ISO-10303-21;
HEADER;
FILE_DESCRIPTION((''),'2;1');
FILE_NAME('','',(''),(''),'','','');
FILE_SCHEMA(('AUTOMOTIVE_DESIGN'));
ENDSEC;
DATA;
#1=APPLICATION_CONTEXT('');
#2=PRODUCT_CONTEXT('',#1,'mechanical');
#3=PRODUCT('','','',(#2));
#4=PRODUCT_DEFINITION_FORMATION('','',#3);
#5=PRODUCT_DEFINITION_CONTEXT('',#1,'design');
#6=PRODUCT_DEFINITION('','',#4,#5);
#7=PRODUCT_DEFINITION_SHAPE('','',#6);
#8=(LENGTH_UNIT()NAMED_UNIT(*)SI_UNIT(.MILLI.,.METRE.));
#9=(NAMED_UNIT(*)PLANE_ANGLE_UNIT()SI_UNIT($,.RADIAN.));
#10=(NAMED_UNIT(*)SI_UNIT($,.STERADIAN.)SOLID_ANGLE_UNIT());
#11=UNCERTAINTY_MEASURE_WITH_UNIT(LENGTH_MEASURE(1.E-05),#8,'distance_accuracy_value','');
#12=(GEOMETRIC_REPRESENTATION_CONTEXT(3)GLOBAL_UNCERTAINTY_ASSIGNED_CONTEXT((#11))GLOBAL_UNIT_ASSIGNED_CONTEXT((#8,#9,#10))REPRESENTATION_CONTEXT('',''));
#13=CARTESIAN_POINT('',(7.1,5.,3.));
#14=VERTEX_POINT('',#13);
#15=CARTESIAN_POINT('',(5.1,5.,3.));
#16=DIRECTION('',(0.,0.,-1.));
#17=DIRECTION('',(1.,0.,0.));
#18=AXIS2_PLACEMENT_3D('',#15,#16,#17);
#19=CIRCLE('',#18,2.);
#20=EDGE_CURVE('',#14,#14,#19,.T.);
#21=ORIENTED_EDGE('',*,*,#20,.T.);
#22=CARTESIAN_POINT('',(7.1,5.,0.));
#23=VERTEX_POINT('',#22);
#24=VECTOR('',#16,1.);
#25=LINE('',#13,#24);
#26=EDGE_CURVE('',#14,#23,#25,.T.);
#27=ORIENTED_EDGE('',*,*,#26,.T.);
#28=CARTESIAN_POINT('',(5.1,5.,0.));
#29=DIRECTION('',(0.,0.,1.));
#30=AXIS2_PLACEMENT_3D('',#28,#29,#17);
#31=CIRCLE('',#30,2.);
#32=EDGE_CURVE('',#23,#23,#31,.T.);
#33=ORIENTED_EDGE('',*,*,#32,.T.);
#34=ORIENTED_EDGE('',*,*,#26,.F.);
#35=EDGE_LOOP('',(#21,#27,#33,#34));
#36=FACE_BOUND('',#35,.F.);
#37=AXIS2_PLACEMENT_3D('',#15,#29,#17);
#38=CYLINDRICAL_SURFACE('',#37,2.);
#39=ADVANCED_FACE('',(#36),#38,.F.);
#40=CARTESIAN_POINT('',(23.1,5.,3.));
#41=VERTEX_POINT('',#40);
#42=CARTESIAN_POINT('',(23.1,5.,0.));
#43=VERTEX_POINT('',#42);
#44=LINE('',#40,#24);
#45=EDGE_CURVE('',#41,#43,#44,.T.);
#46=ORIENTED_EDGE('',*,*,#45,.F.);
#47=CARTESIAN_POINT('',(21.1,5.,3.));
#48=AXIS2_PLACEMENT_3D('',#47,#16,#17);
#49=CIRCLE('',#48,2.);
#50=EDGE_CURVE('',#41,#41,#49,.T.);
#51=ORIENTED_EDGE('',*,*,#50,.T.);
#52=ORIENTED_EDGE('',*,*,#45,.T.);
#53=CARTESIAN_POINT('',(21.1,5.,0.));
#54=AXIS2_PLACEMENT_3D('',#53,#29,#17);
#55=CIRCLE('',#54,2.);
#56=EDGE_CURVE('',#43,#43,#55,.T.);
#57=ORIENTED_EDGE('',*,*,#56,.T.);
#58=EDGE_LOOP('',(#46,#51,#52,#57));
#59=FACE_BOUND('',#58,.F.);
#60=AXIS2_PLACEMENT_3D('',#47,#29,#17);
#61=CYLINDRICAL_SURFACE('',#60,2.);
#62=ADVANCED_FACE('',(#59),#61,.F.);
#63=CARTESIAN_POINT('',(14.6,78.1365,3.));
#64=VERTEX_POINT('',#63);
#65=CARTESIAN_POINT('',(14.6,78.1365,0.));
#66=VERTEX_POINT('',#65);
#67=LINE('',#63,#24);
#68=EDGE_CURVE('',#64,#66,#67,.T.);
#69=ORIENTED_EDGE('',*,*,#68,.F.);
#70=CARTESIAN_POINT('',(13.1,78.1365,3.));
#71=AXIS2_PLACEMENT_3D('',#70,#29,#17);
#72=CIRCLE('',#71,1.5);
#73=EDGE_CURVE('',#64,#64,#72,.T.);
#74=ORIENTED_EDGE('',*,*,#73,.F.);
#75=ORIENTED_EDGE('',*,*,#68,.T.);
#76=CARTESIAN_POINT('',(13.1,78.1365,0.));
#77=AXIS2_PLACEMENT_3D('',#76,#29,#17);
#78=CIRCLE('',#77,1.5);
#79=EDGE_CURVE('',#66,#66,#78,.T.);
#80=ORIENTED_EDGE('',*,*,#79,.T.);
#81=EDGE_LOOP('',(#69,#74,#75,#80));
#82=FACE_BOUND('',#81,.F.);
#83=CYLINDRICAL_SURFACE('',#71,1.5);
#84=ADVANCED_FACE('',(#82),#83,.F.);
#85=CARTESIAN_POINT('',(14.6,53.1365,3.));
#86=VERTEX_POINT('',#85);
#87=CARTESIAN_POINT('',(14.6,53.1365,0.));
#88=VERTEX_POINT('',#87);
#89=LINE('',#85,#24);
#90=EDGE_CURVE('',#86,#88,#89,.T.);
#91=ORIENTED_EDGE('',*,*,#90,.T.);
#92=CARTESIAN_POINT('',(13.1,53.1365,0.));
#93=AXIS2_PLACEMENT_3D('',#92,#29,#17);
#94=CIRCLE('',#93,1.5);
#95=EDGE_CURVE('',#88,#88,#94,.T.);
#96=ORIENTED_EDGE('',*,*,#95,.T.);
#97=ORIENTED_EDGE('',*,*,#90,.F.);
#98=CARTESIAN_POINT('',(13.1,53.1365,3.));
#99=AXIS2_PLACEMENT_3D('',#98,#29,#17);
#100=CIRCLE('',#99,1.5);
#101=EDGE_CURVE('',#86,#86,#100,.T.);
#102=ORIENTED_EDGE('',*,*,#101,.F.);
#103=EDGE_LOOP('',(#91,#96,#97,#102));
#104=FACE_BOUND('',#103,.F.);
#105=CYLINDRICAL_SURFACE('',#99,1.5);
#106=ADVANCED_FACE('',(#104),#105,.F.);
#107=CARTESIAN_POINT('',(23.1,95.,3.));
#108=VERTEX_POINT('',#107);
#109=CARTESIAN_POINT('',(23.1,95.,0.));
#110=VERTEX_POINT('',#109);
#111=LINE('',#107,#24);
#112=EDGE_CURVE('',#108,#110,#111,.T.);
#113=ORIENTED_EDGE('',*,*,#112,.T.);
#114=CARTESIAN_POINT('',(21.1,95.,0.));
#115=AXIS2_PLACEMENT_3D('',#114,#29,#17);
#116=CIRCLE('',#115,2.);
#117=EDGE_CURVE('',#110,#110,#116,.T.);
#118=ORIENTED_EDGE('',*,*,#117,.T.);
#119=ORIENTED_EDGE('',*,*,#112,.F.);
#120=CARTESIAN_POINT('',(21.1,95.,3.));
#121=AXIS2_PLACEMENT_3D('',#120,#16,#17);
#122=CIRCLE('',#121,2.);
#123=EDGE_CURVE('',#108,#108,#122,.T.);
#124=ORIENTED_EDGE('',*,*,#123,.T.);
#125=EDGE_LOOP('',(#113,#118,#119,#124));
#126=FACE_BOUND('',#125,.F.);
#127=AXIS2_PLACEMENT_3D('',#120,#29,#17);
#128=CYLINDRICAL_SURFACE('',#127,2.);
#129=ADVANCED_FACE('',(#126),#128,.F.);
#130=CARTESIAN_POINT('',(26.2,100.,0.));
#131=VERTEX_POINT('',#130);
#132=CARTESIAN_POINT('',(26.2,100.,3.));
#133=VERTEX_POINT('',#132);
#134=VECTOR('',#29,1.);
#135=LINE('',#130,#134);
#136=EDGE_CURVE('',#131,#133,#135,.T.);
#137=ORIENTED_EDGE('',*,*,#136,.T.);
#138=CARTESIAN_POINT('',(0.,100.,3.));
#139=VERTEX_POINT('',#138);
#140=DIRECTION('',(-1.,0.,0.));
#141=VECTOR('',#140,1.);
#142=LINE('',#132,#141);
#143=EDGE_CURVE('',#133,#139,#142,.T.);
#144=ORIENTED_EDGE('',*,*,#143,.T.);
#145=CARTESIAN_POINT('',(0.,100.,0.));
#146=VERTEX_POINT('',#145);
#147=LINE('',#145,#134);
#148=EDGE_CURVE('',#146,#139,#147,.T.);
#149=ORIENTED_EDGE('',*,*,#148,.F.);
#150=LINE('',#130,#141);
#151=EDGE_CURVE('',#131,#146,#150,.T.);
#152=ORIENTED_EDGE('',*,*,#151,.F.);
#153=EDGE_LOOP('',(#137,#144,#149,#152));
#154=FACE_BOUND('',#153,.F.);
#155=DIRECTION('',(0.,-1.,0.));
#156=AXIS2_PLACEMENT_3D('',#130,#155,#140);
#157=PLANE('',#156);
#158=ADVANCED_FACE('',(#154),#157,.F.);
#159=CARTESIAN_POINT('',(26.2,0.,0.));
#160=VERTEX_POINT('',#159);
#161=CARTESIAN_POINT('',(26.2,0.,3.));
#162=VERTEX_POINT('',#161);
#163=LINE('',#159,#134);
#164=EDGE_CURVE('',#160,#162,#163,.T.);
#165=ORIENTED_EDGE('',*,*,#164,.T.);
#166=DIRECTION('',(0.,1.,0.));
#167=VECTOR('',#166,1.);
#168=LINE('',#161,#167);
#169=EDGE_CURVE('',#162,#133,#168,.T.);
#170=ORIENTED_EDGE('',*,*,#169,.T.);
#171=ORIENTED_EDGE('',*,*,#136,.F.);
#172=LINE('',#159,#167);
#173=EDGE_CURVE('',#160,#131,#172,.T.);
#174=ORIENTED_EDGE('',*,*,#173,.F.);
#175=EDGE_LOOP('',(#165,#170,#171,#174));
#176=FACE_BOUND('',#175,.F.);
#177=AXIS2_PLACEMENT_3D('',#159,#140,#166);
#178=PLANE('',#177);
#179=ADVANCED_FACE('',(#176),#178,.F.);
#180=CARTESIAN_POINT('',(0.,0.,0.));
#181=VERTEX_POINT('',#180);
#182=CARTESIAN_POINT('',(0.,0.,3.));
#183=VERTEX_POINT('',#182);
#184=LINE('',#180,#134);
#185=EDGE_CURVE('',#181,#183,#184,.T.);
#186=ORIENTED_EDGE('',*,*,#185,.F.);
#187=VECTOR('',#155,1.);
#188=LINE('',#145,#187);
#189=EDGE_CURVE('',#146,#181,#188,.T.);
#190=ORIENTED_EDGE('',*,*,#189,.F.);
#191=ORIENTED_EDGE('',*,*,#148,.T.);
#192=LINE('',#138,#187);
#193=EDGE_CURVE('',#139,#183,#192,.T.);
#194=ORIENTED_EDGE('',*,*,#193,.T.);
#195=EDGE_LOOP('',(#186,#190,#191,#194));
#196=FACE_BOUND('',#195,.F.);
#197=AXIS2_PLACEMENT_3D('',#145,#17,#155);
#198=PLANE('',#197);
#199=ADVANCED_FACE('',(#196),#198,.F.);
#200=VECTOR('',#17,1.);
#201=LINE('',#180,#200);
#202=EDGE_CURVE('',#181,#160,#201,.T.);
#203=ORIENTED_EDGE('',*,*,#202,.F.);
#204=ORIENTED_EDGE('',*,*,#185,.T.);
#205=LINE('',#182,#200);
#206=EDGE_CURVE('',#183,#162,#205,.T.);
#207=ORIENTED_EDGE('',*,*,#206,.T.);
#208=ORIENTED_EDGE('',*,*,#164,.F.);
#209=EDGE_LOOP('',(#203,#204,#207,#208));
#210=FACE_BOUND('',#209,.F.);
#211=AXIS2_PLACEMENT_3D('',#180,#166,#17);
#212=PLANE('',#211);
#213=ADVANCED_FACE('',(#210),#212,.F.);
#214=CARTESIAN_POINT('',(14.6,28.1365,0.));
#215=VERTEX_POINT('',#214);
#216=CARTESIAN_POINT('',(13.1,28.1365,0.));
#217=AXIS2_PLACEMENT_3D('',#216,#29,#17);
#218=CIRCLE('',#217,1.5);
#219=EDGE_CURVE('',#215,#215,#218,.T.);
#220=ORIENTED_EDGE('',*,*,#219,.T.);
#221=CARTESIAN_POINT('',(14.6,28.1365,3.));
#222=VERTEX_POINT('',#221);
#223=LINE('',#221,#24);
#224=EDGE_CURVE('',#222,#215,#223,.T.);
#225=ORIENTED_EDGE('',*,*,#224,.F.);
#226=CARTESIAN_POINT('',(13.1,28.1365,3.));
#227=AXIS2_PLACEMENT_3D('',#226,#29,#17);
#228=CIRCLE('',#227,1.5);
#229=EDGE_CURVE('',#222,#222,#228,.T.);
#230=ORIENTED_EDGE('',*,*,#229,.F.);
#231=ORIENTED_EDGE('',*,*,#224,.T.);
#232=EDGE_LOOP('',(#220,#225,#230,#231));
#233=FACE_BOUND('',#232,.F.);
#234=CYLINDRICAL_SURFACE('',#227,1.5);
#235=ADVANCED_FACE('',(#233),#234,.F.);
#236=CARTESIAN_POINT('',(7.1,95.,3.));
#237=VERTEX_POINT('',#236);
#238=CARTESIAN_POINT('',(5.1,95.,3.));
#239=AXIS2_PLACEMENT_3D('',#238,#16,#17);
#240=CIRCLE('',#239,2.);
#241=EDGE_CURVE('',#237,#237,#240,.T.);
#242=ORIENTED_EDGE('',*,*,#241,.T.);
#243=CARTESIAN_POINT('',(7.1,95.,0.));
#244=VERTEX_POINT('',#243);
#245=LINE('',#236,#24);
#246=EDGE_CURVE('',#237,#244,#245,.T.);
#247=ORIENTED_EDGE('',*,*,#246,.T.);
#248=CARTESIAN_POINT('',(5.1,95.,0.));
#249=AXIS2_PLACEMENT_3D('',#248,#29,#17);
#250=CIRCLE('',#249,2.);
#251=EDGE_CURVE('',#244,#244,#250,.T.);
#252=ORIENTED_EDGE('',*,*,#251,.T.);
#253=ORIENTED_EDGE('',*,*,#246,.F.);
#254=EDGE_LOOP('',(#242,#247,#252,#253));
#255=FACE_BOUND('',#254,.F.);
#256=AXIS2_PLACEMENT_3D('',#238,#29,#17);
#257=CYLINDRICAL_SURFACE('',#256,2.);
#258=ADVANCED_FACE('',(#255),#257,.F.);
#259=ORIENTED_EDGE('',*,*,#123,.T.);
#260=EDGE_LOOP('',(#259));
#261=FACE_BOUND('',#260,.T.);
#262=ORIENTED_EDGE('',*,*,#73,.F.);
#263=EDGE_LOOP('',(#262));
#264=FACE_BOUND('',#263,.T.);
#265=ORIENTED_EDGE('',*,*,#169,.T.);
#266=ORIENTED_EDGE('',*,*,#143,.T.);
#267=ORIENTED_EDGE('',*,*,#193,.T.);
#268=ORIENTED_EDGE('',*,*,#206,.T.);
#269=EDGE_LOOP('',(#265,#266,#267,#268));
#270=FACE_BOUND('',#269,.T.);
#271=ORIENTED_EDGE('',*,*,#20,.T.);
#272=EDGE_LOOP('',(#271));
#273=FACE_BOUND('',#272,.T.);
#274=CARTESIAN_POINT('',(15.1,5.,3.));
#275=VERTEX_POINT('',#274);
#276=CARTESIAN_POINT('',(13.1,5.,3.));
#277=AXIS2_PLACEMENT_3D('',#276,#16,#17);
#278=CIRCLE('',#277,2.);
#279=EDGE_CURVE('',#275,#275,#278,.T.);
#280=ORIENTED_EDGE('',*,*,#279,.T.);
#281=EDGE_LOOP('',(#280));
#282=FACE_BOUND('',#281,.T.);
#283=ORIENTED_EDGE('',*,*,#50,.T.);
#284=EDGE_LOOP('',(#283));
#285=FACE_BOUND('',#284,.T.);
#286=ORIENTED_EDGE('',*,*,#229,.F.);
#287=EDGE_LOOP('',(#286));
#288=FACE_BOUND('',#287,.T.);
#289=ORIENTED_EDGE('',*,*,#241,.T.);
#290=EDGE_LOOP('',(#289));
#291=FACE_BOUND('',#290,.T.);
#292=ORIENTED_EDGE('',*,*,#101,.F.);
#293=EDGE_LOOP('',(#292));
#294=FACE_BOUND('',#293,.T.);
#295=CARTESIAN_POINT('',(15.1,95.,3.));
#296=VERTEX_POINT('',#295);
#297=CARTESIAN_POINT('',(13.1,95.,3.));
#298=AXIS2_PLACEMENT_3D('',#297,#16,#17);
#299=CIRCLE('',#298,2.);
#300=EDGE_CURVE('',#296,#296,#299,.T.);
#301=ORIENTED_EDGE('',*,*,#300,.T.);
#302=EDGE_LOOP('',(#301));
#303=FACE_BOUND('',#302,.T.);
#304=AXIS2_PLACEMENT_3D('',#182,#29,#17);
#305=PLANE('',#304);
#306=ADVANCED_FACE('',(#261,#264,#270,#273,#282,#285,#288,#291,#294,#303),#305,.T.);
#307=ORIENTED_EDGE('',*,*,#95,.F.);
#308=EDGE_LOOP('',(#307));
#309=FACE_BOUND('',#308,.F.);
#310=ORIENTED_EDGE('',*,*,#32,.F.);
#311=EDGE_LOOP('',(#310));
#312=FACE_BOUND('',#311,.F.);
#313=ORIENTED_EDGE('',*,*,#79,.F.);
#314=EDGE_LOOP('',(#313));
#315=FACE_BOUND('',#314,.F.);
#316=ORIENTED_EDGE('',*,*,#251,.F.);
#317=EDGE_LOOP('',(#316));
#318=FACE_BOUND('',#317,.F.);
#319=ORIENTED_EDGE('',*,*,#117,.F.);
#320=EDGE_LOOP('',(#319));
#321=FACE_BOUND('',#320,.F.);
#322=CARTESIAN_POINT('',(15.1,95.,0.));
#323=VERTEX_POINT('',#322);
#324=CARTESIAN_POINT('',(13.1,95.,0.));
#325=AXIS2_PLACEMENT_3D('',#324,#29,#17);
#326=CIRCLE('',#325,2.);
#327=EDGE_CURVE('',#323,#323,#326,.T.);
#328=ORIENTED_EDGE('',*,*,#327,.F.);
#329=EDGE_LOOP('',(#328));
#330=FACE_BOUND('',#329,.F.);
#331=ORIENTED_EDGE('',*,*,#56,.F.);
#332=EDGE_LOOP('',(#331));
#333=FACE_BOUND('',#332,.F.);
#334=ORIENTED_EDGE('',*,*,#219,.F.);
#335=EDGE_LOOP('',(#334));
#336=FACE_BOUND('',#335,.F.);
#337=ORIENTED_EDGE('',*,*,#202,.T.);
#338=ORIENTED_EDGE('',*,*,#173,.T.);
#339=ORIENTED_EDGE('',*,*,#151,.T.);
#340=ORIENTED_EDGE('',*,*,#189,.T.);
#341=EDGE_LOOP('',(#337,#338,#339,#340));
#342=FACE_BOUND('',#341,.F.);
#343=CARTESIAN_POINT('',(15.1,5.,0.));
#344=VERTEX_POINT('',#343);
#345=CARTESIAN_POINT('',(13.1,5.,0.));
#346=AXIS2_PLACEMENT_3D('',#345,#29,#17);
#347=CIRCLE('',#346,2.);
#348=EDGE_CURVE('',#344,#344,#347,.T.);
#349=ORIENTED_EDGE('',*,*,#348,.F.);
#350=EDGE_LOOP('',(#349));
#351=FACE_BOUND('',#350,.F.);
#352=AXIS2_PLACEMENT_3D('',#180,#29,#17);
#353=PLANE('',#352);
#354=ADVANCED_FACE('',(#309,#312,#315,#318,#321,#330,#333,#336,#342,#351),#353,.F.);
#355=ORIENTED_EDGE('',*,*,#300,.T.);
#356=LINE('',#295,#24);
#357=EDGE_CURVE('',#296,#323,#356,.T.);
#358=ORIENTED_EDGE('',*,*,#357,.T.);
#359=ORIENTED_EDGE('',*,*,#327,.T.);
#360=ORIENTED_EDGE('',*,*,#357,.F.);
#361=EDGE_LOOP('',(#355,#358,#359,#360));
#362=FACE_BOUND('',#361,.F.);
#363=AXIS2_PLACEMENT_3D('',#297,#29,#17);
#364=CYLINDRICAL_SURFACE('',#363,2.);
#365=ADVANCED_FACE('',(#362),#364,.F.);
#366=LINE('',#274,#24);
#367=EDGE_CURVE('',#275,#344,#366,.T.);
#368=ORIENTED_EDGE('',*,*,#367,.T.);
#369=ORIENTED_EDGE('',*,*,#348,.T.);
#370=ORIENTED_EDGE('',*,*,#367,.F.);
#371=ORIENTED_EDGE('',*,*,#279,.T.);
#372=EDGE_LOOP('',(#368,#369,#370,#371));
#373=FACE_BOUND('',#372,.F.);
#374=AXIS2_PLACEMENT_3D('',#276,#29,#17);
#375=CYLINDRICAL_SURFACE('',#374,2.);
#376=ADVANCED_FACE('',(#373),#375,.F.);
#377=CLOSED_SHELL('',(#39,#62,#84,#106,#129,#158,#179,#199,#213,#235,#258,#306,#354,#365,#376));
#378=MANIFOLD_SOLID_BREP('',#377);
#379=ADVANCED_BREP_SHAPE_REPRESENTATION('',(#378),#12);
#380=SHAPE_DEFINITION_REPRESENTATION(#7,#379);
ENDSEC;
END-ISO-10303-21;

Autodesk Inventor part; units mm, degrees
ref_plane "YZ Plane" through (0, 0, 0) normal (1, 0, 0) x (0, 1, 0)
ref_plane "XZ Plane" through (0, 0, 0) normal (0, 1, 0) x (-1, 0, 0)
sketch "Эскиз1" plane through (0, 0, 0) normal (0, 0, 1) x (1, 0, 0)
  line L0 (0, 0) -> (26.2, 0)
  line L1 (26.2, 0) -> (26.2, 100)
  line L2 (26.2, 100) -> (0, 100)
  line L3 (0, 100) -> (0, 0)
  dimension "d0" = 26.2
  dimension "d1" = 100
extrude "Выдавливание1" add sketch "Эскиз1" along normal blind 3
sketch "Эскиз2" plane through (0, 0, 3) normal (0, 0, 1) x (1, 0, 0)
  line L0 (0, 0) -> (26.2, 0) projected
  line L1 (13.1, 0) -> (13.1, 5)
  circle A0 centre (13.1, 5) radius 2
  dimension "d4" = 5
  dimension "d5" = 4
extrude "Выдавливание2" cut sketch "Эскиз2" against normal blind 3
pattern_linear "Прямоуг.массив1" count 3 spacing 8 along (1, 0, 0) of "Выдавливание2" first direction both ways yes
sketch "Эскиз3" plane through (0, 0, 3) normal (0, 0, 1) x (1, 0, 0)
  line L0 (26.2, 0) -> (26.2, 100) projected
  line L1 (26.2, 28.1365) -> (26.2, 15.0365)
  line L2 (26.2, 28.1365) -> (13.1, 28.1365)
  circle A0 centre (13.1, 28.1365) radius 1.5
  point P0 (0, 0)
  dimension "d12" = 13.1
  dimension "d13" = 3
extrude "Выдавливание3" cut sketch "Эскиз3" against normal blind 3
pattern_linear "Прямоуг.массив2" count 3 spacing 25 along (0, 1, 0) of "Выдавливание3"
ref_plane "РабПлоскость1" through (26.2, 50, 3) normal (0, 1, 0) x (1, 0, 0)
mirror "Зеркальное отражение1" about plane through (26.2, 50, 3) normal (0, 1, 0) of "Выдавливание2", "Прямоуг.массив1"
properties part number "000.405 - Рычаг" material "Пластик АБС"
